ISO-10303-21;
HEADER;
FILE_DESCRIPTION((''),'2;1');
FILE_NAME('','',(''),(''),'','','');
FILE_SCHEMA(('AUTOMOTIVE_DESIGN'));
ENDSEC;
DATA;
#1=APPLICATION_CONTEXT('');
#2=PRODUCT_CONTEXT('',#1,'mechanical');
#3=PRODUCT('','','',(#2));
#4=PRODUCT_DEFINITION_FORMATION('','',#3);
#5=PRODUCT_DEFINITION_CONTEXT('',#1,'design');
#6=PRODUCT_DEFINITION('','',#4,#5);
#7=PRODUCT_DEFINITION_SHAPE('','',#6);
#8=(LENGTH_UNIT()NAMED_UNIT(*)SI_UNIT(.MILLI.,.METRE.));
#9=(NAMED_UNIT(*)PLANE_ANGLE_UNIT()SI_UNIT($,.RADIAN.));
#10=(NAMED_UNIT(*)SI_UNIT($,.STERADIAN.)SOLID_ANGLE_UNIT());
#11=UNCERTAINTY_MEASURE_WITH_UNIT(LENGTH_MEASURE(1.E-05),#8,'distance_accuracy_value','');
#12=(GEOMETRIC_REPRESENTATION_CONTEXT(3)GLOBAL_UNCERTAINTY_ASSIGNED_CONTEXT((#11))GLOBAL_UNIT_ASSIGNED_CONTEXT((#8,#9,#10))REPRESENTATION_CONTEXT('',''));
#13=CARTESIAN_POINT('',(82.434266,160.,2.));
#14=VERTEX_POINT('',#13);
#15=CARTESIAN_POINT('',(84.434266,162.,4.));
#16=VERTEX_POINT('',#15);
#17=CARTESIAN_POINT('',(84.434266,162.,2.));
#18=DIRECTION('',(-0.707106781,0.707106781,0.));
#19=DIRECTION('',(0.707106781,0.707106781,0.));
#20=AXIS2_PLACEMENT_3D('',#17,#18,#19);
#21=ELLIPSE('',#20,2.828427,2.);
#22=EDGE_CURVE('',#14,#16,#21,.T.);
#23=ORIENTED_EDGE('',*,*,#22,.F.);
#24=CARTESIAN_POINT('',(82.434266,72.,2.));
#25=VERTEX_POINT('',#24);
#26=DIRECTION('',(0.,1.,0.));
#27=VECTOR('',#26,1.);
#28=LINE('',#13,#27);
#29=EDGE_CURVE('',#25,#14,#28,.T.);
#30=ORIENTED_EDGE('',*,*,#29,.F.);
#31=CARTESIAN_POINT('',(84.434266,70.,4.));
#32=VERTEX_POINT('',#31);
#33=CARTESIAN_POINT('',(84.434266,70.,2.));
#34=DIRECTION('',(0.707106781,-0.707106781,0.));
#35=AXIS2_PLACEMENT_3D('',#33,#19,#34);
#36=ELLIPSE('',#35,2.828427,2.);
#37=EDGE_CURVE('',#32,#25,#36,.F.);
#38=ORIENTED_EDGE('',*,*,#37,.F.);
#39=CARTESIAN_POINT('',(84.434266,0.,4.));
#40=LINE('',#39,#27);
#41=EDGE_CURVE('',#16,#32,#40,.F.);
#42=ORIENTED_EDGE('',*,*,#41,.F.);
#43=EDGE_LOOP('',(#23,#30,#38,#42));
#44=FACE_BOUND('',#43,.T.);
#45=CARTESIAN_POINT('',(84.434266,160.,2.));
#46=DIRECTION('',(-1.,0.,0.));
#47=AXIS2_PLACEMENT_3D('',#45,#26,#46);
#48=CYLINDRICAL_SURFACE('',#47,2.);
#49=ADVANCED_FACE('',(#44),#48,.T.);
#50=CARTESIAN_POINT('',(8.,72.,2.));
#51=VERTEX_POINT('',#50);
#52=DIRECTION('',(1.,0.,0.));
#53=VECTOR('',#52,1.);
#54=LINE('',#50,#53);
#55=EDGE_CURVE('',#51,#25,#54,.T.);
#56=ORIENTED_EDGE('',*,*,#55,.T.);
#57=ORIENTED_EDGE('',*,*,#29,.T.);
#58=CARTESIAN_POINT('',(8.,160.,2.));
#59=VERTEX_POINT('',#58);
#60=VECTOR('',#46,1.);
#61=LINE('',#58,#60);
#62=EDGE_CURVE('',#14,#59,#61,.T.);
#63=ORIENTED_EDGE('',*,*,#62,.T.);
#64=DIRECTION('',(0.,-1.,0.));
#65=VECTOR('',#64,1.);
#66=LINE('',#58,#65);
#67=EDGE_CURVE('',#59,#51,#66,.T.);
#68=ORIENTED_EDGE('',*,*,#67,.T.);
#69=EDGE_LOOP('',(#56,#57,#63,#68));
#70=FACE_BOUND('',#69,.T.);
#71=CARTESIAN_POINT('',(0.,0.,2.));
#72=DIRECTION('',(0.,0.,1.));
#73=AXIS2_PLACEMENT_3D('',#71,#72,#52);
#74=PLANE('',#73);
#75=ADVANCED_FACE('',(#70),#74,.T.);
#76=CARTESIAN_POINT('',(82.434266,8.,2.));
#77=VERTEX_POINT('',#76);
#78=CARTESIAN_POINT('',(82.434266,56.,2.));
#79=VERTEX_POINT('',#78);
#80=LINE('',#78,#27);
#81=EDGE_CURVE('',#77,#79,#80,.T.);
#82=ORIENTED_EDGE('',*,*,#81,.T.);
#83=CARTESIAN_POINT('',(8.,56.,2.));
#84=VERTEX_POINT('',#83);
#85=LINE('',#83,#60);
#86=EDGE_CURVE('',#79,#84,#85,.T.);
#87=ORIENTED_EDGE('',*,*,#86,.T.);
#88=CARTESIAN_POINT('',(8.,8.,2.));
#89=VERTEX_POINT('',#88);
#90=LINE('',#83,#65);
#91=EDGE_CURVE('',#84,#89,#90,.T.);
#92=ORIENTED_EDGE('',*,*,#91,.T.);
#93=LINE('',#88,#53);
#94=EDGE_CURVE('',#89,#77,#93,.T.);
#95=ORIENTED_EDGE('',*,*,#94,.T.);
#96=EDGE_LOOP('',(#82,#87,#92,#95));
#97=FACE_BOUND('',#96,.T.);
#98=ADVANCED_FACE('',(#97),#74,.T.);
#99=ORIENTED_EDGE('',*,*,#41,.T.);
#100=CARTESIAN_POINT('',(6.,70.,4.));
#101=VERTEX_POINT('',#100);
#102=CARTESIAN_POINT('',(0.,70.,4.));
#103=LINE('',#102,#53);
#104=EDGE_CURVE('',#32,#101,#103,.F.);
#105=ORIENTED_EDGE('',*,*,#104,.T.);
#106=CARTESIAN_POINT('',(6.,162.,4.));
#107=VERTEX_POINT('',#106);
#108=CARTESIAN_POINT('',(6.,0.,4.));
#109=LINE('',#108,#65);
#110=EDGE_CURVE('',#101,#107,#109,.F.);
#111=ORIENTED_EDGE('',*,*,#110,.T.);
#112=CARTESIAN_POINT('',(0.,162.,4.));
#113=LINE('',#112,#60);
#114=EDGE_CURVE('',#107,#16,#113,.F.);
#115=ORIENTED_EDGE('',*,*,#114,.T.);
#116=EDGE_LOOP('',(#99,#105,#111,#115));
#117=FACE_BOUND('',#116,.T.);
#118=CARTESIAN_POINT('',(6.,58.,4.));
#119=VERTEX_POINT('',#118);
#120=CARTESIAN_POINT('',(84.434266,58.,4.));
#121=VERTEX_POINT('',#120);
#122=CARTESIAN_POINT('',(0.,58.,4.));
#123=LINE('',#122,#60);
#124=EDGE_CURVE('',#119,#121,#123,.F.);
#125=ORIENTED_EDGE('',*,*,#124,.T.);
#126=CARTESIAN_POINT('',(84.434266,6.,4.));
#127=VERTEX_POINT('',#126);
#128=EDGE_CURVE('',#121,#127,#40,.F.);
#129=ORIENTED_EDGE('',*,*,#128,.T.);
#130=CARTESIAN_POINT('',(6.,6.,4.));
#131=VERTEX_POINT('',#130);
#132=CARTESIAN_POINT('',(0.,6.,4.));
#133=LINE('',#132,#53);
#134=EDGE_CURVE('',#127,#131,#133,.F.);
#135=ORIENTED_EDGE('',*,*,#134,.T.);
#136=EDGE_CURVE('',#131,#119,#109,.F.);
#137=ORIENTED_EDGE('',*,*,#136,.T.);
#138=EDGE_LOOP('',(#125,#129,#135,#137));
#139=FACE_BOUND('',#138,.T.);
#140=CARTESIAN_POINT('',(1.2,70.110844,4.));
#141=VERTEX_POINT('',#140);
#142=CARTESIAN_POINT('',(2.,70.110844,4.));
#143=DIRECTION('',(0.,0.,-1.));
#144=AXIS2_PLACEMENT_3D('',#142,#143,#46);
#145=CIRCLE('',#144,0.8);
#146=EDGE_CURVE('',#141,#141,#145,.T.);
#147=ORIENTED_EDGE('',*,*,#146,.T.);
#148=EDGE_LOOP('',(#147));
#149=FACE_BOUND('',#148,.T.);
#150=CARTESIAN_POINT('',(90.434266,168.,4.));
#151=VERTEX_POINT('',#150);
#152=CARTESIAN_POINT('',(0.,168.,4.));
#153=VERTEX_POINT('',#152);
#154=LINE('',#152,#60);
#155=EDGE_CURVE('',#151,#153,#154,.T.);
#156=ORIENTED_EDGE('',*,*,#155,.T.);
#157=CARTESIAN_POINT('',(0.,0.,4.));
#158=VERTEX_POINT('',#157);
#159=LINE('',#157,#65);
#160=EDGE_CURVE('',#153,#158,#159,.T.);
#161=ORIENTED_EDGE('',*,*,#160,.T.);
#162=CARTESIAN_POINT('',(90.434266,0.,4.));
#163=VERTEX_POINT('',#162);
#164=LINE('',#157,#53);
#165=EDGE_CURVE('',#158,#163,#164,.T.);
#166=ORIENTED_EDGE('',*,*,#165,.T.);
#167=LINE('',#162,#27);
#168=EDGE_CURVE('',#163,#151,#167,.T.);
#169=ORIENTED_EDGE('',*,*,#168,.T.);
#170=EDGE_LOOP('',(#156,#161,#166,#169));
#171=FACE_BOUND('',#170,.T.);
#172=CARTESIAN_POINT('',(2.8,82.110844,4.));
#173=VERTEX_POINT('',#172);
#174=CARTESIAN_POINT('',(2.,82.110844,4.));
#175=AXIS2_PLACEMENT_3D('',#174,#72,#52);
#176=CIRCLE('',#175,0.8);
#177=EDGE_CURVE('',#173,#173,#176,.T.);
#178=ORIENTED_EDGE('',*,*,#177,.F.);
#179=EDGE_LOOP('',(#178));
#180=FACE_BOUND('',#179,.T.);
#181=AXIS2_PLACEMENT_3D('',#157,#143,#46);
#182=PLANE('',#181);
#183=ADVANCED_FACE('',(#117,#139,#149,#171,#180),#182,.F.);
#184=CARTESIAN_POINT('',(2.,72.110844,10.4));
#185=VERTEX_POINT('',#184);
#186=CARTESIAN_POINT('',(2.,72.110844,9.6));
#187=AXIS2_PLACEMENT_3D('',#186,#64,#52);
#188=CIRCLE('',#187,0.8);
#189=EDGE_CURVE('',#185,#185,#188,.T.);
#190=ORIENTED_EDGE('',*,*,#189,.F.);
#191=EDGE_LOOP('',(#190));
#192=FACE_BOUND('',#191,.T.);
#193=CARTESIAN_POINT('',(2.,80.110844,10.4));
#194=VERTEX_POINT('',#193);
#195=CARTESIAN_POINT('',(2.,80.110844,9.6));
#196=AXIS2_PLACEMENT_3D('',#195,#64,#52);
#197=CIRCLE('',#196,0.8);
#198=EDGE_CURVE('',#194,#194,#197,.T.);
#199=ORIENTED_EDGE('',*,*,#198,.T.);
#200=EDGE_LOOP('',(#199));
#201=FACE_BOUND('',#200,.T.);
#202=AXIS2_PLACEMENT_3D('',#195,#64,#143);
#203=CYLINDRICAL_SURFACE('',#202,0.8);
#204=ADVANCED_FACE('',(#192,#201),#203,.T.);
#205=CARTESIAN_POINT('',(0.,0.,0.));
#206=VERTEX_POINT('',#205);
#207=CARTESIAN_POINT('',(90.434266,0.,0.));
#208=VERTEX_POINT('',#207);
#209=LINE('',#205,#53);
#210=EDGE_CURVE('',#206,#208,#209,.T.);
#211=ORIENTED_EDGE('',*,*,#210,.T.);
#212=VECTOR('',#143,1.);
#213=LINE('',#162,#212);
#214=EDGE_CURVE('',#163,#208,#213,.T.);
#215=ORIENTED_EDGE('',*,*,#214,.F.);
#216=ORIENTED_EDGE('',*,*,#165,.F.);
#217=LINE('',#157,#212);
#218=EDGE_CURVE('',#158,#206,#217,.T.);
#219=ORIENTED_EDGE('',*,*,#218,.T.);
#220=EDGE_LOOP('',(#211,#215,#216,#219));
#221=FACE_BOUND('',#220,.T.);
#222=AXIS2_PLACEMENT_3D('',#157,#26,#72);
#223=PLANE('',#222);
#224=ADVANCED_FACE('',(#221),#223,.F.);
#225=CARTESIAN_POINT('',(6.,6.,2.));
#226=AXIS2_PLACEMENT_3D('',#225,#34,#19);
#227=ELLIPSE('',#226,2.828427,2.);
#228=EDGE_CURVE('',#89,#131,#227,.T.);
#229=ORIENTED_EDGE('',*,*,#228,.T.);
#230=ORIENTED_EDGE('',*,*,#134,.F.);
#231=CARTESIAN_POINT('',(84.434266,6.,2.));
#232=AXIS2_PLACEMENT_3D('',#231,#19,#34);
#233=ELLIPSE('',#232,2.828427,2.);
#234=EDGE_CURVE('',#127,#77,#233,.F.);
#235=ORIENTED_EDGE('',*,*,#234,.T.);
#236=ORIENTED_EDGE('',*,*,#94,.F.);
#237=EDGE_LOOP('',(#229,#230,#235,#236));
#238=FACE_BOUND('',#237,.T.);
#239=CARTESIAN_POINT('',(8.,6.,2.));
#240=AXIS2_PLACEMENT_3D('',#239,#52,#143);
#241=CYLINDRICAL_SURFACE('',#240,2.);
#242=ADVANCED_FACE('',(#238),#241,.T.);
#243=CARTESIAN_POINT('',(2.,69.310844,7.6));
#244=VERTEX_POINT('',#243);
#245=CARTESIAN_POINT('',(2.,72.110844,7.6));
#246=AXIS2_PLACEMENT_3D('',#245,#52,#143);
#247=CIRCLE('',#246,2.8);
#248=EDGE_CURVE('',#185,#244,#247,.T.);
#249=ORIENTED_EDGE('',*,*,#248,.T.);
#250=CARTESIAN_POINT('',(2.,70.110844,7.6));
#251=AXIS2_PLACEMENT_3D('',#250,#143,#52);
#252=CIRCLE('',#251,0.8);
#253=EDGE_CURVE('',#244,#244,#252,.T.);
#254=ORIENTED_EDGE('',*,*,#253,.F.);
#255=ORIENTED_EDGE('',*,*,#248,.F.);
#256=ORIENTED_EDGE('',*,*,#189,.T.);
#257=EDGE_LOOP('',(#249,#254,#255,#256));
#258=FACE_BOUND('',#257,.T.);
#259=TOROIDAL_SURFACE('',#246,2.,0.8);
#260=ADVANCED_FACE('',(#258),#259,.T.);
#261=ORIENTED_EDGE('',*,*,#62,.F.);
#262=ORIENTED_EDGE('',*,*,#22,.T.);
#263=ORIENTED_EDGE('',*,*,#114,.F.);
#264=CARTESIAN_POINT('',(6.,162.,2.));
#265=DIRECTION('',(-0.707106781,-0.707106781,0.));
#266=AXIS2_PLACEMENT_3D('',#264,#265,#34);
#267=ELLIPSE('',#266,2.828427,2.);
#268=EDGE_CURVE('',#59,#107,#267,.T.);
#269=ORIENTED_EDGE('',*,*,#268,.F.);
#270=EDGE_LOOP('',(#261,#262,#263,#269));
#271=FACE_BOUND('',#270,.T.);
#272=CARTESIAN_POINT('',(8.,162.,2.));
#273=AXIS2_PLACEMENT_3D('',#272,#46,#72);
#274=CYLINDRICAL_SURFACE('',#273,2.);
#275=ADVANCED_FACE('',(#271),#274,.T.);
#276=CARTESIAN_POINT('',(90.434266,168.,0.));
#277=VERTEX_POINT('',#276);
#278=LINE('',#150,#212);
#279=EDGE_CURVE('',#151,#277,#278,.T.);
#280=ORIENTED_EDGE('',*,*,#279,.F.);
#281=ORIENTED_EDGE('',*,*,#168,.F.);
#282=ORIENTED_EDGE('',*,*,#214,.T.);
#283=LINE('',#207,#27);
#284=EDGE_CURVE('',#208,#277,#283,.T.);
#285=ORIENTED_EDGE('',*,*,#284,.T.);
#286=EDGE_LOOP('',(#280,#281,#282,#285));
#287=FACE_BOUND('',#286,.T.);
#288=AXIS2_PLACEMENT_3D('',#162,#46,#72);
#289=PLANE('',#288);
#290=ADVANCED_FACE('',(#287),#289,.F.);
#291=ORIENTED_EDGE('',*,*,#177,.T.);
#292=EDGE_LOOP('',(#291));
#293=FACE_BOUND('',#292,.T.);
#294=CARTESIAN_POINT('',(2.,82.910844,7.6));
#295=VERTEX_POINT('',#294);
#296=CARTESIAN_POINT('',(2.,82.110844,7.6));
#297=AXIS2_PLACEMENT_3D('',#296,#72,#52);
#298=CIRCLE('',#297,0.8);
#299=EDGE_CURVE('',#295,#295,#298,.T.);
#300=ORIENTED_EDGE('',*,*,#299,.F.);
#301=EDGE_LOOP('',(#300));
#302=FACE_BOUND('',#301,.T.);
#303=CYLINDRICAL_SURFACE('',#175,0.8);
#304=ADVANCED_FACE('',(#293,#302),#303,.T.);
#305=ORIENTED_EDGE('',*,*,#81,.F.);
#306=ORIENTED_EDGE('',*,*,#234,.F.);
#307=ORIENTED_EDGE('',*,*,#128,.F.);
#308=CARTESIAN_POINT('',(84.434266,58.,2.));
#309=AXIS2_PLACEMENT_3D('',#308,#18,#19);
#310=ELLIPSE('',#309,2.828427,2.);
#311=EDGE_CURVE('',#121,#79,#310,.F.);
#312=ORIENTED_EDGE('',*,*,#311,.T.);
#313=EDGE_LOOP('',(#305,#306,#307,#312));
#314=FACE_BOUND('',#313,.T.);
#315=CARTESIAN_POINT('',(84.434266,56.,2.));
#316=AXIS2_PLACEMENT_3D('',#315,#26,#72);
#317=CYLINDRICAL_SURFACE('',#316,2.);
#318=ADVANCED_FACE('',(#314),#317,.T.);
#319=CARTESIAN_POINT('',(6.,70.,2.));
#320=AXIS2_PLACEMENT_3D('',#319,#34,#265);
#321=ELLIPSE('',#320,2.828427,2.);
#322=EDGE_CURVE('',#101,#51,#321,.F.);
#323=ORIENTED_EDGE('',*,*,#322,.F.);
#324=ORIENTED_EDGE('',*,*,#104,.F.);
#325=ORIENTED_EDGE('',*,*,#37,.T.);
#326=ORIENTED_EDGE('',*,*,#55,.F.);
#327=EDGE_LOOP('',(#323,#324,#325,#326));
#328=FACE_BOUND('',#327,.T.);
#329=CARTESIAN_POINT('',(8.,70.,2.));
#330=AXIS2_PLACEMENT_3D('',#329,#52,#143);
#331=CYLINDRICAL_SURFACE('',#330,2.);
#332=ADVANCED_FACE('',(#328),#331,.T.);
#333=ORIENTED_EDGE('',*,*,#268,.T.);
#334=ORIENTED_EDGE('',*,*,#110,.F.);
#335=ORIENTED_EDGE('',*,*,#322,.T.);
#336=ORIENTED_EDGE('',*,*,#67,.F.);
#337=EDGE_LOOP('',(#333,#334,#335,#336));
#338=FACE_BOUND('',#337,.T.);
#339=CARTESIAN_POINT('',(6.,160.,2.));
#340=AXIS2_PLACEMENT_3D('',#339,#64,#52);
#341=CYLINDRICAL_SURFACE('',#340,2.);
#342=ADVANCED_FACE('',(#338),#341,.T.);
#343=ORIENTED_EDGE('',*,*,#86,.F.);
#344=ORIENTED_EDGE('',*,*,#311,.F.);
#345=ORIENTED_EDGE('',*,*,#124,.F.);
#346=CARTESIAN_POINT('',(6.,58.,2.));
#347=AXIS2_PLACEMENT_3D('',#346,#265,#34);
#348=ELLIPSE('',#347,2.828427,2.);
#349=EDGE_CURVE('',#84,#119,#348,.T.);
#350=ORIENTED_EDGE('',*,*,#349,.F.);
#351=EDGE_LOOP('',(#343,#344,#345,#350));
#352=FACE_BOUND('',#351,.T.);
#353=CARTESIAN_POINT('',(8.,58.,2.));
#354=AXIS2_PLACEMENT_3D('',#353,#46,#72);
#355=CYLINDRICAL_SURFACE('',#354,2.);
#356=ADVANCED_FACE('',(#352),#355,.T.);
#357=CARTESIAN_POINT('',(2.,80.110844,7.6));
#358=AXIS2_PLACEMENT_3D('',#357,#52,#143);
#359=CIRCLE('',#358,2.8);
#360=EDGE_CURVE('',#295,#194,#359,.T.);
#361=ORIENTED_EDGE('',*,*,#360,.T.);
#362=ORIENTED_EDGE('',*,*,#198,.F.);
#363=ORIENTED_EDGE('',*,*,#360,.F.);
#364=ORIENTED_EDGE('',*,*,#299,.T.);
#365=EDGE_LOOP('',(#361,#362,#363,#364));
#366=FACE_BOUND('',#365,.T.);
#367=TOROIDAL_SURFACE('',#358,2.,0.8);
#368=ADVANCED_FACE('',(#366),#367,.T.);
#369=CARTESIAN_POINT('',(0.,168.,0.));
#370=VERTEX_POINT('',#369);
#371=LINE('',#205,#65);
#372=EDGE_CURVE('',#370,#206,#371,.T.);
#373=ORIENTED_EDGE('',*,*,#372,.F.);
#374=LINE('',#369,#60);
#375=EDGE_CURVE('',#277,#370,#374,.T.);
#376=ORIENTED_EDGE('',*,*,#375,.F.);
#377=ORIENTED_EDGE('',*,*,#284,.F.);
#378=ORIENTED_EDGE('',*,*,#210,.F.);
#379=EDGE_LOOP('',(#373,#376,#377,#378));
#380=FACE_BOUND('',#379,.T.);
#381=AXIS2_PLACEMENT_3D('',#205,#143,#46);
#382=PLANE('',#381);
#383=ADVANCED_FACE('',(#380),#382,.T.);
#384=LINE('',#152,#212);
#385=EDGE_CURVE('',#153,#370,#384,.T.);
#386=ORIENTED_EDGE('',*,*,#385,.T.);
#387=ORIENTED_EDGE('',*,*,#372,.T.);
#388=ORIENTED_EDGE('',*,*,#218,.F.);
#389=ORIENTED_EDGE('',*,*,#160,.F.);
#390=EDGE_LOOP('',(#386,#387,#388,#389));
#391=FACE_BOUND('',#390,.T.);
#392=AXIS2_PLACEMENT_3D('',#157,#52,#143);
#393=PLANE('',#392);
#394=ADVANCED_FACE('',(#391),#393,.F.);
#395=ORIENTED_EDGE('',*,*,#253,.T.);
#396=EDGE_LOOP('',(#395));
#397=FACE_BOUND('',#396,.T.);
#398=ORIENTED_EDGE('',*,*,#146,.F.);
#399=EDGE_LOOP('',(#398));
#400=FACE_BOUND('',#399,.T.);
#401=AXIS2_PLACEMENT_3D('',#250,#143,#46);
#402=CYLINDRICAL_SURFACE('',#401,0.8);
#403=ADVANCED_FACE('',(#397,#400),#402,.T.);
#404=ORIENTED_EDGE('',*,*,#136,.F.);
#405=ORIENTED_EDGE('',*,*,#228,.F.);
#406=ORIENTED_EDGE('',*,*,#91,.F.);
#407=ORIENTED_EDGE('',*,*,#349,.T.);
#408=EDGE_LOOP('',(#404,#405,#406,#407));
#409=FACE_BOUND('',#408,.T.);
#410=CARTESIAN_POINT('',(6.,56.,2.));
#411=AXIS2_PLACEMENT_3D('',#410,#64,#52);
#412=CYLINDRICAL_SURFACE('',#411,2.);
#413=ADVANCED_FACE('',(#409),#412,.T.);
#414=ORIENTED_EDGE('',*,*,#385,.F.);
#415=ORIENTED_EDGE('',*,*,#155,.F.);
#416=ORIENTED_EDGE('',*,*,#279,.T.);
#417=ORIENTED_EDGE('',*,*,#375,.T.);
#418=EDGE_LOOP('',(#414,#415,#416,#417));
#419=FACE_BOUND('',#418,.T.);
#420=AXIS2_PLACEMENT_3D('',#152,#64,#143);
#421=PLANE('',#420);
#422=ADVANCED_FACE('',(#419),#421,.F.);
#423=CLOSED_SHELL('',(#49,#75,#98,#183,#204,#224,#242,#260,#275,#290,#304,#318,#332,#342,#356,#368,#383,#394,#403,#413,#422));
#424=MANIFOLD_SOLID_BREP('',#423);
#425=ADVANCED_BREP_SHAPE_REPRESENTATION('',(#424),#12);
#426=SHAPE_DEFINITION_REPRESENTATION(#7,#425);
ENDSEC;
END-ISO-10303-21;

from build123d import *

# Parameters (mm, degrees)
SKETCH1_W           = 1130.428324658
SKETCH1_H           = 2100
BOSS_EXTRUDE1_DEPTH = 50
SKETCH3_W           = 930.428324658
SKETCH3_H           = 600
SKETCH3_H_2         = 1100
CUT_EXTRUDE1_DEPTH  = 25
FILLET1_R           = 25
SKETCH5_R           = 10
SCALE2_SCALE        = 0.25
SCALE3_SCALE        = 0.32


with BuildPart() as part:
    # Sketch1 → Boss-Extrude1 (new body)
    with BuildSketch(Plane.XY):
        with Locations((565.214162329, 1050)):
            Rectangle(SKETCH1_W, SKETCH1_H)
    extrude(amount=BOSS_EXTRUDE1_DEPTH)

    # Sketch3 → Cut-Extrude1 (cut)
    with BuildSketch(Plane.XY.offset(50)):
        with Locations((565.214162329, 400)):
            Rectangle(SKETCH3_W, SKETCH3_H)
        with Locations((565.214162329, 1450)):
            Rectangle(SKETCH3_W, SKETCH3_H_2)
    extrude(amount=-CUT_EXTRUDE1_DEPTH, mode=Mode.SUBTRACT)

    # Fillet1
    fillet1_edges = [part.edges().sort_by_distance(p)[0] for p in [
        (565.214162329, 100, 50),
        (100, 400, 50),
        (1030.428324658, 400, 50),
        (565.214162329, 700, 50),
        (100, 1450, 50),
        (565.214162329, 900, 50),
        (1030.428324658, 1450, 50),
        (565.214162329, 2000, 50),
    ]]
    fillet(fillet1_edges, radius=FILLET1_R - 0.0001)  # a hair under: the kernel refuses the full size

    # Sweep1: sweep along a path in Sketch4
    with BuildLine(Plane.ZY.offset(-25)) as sweep1_path:
        Line((50, 1026.385549177), (95, 1026.385549177))
        ThreePointArc((95, 1026.385549177), (112.67766953, 1019.063218707), (120, 1001.385549177))
        Line((120, 1001.385549177), (120, 901.385549177))
        ThreePointArc((120, 901.385549177), (112.67766953, 883.707879648), (95, 876.385549177))
        Line((95, 876.385549177), (48.369845226, 876.385549177))
    # Sketch5 → Sweep1 (sweep)
    with BuildSketch(Plane.XY.offset(50)):
        with Locations((25, 1026.385549177)):
            Circle(SKETCH5_R)
    sweep(path=sweep1_path.line)


with BuildPart() as part_1:
    # Scale2: scaled about (0, 0, 0)
    add(part.part.scale(SCALE2_SCALE))


with BuildPart() as part_2:
    # Scale3: scaled about (0, 0, 0)
    add(part_1.part.scale(SCALE3_SCALE))


solid = part_2.part
